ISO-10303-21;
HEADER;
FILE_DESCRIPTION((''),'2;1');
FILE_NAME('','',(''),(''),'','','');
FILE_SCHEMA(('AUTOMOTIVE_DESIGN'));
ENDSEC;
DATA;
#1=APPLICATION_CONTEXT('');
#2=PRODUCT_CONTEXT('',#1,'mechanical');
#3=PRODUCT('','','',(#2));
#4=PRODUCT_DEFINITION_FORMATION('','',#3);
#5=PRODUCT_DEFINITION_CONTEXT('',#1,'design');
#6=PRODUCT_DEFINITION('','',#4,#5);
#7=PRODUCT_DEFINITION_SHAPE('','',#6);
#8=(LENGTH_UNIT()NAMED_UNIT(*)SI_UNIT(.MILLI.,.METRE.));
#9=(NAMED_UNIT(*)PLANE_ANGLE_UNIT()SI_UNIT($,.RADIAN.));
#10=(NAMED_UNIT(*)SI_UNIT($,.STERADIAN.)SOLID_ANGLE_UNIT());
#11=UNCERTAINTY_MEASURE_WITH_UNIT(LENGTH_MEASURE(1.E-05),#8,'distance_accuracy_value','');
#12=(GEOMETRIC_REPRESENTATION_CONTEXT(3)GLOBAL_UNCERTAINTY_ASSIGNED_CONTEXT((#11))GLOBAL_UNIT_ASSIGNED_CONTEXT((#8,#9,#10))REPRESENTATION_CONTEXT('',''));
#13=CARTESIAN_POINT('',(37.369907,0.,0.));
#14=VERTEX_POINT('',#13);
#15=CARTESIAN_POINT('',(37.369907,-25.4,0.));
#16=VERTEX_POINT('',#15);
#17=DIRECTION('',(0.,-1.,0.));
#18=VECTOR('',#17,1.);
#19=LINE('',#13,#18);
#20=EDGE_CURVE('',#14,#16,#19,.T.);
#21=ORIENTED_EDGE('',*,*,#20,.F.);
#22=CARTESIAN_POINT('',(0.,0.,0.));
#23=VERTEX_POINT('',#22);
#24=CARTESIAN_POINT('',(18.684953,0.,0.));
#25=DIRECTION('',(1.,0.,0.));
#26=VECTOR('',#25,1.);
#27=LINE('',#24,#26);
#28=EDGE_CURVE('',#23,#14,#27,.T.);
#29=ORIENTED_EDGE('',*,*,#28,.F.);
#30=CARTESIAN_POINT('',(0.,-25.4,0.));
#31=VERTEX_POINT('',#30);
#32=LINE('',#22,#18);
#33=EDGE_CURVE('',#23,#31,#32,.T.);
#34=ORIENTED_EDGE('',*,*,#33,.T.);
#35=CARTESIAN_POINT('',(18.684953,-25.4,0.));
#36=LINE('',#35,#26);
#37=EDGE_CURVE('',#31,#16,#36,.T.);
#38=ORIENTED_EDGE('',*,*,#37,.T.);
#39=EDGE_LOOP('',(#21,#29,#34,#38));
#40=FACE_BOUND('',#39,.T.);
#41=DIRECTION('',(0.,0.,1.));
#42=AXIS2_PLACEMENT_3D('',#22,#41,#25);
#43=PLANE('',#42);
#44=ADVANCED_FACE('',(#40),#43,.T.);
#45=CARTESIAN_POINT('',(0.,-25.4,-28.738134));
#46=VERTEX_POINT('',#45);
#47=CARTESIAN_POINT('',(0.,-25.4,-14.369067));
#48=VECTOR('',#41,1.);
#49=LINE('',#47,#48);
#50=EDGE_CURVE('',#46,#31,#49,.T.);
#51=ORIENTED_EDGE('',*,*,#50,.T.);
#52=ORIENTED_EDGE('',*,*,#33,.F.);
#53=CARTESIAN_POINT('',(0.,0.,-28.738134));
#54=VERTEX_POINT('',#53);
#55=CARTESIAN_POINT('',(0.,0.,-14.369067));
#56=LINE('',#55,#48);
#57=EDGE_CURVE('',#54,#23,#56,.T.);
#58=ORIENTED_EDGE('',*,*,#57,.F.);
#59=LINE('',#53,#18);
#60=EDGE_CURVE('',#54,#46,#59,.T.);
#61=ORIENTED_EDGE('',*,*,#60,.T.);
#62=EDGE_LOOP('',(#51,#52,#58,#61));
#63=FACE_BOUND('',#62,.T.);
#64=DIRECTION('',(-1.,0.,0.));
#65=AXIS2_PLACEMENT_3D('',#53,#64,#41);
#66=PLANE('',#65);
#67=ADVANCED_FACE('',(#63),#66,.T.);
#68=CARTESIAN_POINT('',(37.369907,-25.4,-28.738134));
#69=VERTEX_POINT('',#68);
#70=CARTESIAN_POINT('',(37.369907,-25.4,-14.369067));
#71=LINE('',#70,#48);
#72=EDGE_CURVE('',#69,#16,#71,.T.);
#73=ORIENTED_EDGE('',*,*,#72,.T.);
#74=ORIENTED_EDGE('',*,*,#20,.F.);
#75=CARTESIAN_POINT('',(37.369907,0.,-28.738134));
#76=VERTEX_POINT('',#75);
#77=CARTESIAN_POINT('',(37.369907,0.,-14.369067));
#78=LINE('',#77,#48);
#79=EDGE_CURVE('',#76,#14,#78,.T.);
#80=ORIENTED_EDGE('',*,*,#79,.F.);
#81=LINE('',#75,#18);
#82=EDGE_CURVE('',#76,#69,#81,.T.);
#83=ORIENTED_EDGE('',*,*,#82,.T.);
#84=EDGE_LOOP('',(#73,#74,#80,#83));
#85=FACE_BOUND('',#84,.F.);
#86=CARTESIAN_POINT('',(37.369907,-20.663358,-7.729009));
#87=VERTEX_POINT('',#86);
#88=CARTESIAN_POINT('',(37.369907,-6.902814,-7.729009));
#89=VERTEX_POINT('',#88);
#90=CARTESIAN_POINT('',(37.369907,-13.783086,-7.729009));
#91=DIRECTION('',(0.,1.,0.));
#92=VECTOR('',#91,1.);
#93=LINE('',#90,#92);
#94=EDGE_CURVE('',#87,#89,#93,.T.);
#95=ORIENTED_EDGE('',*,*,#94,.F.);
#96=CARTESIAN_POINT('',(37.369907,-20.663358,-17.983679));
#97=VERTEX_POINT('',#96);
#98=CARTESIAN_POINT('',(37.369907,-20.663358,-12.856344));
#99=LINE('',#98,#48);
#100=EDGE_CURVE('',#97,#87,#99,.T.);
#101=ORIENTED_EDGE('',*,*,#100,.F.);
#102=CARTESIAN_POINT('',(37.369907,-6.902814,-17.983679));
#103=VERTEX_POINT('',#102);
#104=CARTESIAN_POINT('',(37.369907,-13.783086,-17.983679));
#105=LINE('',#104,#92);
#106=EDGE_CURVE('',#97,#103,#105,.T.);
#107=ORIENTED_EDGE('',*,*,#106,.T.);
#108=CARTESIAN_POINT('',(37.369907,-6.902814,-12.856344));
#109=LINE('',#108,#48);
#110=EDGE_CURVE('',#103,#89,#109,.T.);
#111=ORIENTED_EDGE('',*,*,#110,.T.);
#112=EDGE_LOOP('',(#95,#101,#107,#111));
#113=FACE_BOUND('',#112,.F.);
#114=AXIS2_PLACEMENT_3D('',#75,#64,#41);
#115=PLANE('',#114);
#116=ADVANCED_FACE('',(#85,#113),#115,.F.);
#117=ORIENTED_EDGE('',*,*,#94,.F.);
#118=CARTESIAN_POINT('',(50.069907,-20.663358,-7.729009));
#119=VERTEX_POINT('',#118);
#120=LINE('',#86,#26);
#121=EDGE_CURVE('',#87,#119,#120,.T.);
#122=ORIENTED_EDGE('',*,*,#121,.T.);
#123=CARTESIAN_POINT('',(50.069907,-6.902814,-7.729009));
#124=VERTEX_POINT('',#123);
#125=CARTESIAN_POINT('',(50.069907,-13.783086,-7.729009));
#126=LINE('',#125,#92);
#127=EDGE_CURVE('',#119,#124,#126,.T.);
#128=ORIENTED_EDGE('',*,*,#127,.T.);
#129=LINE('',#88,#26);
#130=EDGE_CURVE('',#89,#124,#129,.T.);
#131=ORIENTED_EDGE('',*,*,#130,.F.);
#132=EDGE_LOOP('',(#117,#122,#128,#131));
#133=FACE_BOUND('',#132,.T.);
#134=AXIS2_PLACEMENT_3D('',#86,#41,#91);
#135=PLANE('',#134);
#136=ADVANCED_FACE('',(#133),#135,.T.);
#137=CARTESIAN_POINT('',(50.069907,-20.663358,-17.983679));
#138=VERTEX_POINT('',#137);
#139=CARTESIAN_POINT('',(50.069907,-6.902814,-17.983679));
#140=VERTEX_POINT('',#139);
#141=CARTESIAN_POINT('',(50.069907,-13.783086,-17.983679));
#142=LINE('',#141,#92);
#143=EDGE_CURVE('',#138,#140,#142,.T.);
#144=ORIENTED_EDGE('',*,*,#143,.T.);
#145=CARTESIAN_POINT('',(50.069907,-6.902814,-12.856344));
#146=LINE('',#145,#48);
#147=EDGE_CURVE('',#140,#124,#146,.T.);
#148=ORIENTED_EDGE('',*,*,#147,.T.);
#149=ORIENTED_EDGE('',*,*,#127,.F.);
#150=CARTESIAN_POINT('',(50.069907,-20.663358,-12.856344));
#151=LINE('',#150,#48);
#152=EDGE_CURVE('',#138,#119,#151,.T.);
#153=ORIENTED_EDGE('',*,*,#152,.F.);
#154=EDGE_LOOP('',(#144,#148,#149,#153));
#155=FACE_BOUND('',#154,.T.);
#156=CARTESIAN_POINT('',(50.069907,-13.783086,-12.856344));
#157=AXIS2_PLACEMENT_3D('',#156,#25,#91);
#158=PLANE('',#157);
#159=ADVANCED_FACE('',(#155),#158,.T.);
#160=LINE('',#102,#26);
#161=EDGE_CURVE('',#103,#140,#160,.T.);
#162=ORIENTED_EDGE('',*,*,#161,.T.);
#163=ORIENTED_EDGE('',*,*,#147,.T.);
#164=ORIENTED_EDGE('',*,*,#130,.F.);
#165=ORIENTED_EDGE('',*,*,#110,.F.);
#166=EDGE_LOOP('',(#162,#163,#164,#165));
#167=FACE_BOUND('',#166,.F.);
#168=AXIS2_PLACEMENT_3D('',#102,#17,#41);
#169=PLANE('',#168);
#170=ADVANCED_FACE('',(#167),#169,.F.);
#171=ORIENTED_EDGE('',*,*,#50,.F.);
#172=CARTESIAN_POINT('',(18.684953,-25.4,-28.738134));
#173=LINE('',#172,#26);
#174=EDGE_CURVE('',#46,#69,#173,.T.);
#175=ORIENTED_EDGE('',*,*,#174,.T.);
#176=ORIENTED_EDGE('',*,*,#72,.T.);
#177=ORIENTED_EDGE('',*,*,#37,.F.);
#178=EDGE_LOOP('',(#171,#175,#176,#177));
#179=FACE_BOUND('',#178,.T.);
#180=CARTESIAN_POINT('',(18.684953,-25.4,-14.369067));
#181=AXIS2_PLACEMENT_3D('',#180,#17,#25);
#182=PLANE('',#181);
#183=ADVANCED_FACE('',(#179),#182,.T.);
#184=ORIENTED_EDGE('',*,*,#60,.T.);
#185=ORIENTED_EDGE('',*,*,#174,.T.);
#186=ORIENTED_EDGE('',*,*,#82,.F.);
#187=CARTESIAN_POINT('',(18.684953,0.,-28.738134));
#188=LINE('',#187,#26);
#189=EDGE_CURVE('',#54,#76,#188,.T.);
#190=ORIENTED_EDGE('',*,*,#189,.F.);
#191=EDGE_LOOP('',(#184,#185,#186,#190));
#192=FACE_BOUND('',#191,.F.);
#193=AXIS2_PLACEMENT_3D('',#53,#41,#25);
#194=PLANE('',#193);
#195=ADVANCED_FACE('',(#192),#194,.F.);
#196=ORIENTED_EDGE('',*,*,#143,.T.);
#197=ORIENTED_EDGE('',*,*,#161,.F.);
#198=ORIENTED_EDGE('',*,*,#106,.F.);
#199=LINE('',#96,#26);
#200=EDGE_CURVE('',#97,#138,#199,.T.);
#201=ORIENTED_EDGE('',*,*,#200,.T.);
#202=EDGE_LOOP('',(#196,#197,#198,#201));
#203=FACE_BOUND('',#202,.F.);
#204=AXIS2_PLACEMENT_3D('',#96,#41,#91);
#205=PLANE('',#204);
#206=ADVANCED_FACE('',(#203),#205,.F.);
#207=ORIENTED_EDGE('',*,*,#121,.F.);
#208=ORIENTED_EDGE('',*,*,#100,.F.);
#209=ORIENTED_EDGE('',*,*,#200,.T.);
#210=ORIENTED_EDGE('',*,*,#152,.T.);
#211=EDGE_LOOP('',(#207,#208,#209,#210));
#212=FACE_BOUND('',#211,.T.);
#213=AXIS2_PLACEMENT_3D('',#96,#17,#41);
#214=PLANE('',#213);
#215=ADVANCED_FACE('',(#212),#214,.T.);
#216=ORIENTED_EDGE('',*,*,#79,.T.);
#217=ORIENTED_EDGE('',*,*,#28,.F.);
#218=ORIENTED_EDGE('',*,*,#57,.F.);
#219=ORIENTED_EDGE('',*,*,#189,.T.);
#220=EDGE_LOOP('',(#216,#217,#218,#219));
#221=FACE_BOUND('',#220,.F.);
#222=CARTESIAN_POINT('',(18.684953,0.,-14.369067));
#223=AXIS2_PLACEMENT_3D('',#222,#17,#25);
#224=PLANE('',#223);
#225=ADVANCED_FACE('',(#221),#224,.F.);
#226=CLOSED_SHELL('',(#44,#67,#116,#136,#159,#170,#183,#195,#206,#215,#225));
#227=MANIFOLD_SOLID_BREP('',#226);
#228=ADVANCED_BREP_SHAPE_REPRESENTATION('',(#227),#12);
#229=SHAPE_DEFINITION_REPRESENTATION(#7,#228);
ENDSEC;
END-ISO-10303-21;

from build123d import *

# Parameters (mm, degrees)
F0_W     = 37.3699069023
F0_H     = 28.7381336093
F1_DEPTH = 25.4
F4_W     = 13.7605443597
F4_H     = 10.2546699345
F5_DEPTH = 12.7


# Not quite as in the source:
# - the program builds the solid bodies; features that only make, move or delete a surface that nothing else refers to are left out


with BuildPart() as f1:
    # F0 (on Front) → F1 (new body)
    with BuildSketch(Plane.XZ):
        with Locations((18.6849534512, -14.3690668046)):
            Rectangle(F0_W, F0_H)
    extrude(amount=F1_DEPTH)

    # F4 (on face) → F5 (join)
    with BuildSketch(Plane.YZ.offset(37.3699069023)):
        with Locations((-13.7830860913, -12.8563437611)):
            Rectangle(F4_W, F4_H)
    extrude(amount=F5_DEPTH)


solid = f1.part
